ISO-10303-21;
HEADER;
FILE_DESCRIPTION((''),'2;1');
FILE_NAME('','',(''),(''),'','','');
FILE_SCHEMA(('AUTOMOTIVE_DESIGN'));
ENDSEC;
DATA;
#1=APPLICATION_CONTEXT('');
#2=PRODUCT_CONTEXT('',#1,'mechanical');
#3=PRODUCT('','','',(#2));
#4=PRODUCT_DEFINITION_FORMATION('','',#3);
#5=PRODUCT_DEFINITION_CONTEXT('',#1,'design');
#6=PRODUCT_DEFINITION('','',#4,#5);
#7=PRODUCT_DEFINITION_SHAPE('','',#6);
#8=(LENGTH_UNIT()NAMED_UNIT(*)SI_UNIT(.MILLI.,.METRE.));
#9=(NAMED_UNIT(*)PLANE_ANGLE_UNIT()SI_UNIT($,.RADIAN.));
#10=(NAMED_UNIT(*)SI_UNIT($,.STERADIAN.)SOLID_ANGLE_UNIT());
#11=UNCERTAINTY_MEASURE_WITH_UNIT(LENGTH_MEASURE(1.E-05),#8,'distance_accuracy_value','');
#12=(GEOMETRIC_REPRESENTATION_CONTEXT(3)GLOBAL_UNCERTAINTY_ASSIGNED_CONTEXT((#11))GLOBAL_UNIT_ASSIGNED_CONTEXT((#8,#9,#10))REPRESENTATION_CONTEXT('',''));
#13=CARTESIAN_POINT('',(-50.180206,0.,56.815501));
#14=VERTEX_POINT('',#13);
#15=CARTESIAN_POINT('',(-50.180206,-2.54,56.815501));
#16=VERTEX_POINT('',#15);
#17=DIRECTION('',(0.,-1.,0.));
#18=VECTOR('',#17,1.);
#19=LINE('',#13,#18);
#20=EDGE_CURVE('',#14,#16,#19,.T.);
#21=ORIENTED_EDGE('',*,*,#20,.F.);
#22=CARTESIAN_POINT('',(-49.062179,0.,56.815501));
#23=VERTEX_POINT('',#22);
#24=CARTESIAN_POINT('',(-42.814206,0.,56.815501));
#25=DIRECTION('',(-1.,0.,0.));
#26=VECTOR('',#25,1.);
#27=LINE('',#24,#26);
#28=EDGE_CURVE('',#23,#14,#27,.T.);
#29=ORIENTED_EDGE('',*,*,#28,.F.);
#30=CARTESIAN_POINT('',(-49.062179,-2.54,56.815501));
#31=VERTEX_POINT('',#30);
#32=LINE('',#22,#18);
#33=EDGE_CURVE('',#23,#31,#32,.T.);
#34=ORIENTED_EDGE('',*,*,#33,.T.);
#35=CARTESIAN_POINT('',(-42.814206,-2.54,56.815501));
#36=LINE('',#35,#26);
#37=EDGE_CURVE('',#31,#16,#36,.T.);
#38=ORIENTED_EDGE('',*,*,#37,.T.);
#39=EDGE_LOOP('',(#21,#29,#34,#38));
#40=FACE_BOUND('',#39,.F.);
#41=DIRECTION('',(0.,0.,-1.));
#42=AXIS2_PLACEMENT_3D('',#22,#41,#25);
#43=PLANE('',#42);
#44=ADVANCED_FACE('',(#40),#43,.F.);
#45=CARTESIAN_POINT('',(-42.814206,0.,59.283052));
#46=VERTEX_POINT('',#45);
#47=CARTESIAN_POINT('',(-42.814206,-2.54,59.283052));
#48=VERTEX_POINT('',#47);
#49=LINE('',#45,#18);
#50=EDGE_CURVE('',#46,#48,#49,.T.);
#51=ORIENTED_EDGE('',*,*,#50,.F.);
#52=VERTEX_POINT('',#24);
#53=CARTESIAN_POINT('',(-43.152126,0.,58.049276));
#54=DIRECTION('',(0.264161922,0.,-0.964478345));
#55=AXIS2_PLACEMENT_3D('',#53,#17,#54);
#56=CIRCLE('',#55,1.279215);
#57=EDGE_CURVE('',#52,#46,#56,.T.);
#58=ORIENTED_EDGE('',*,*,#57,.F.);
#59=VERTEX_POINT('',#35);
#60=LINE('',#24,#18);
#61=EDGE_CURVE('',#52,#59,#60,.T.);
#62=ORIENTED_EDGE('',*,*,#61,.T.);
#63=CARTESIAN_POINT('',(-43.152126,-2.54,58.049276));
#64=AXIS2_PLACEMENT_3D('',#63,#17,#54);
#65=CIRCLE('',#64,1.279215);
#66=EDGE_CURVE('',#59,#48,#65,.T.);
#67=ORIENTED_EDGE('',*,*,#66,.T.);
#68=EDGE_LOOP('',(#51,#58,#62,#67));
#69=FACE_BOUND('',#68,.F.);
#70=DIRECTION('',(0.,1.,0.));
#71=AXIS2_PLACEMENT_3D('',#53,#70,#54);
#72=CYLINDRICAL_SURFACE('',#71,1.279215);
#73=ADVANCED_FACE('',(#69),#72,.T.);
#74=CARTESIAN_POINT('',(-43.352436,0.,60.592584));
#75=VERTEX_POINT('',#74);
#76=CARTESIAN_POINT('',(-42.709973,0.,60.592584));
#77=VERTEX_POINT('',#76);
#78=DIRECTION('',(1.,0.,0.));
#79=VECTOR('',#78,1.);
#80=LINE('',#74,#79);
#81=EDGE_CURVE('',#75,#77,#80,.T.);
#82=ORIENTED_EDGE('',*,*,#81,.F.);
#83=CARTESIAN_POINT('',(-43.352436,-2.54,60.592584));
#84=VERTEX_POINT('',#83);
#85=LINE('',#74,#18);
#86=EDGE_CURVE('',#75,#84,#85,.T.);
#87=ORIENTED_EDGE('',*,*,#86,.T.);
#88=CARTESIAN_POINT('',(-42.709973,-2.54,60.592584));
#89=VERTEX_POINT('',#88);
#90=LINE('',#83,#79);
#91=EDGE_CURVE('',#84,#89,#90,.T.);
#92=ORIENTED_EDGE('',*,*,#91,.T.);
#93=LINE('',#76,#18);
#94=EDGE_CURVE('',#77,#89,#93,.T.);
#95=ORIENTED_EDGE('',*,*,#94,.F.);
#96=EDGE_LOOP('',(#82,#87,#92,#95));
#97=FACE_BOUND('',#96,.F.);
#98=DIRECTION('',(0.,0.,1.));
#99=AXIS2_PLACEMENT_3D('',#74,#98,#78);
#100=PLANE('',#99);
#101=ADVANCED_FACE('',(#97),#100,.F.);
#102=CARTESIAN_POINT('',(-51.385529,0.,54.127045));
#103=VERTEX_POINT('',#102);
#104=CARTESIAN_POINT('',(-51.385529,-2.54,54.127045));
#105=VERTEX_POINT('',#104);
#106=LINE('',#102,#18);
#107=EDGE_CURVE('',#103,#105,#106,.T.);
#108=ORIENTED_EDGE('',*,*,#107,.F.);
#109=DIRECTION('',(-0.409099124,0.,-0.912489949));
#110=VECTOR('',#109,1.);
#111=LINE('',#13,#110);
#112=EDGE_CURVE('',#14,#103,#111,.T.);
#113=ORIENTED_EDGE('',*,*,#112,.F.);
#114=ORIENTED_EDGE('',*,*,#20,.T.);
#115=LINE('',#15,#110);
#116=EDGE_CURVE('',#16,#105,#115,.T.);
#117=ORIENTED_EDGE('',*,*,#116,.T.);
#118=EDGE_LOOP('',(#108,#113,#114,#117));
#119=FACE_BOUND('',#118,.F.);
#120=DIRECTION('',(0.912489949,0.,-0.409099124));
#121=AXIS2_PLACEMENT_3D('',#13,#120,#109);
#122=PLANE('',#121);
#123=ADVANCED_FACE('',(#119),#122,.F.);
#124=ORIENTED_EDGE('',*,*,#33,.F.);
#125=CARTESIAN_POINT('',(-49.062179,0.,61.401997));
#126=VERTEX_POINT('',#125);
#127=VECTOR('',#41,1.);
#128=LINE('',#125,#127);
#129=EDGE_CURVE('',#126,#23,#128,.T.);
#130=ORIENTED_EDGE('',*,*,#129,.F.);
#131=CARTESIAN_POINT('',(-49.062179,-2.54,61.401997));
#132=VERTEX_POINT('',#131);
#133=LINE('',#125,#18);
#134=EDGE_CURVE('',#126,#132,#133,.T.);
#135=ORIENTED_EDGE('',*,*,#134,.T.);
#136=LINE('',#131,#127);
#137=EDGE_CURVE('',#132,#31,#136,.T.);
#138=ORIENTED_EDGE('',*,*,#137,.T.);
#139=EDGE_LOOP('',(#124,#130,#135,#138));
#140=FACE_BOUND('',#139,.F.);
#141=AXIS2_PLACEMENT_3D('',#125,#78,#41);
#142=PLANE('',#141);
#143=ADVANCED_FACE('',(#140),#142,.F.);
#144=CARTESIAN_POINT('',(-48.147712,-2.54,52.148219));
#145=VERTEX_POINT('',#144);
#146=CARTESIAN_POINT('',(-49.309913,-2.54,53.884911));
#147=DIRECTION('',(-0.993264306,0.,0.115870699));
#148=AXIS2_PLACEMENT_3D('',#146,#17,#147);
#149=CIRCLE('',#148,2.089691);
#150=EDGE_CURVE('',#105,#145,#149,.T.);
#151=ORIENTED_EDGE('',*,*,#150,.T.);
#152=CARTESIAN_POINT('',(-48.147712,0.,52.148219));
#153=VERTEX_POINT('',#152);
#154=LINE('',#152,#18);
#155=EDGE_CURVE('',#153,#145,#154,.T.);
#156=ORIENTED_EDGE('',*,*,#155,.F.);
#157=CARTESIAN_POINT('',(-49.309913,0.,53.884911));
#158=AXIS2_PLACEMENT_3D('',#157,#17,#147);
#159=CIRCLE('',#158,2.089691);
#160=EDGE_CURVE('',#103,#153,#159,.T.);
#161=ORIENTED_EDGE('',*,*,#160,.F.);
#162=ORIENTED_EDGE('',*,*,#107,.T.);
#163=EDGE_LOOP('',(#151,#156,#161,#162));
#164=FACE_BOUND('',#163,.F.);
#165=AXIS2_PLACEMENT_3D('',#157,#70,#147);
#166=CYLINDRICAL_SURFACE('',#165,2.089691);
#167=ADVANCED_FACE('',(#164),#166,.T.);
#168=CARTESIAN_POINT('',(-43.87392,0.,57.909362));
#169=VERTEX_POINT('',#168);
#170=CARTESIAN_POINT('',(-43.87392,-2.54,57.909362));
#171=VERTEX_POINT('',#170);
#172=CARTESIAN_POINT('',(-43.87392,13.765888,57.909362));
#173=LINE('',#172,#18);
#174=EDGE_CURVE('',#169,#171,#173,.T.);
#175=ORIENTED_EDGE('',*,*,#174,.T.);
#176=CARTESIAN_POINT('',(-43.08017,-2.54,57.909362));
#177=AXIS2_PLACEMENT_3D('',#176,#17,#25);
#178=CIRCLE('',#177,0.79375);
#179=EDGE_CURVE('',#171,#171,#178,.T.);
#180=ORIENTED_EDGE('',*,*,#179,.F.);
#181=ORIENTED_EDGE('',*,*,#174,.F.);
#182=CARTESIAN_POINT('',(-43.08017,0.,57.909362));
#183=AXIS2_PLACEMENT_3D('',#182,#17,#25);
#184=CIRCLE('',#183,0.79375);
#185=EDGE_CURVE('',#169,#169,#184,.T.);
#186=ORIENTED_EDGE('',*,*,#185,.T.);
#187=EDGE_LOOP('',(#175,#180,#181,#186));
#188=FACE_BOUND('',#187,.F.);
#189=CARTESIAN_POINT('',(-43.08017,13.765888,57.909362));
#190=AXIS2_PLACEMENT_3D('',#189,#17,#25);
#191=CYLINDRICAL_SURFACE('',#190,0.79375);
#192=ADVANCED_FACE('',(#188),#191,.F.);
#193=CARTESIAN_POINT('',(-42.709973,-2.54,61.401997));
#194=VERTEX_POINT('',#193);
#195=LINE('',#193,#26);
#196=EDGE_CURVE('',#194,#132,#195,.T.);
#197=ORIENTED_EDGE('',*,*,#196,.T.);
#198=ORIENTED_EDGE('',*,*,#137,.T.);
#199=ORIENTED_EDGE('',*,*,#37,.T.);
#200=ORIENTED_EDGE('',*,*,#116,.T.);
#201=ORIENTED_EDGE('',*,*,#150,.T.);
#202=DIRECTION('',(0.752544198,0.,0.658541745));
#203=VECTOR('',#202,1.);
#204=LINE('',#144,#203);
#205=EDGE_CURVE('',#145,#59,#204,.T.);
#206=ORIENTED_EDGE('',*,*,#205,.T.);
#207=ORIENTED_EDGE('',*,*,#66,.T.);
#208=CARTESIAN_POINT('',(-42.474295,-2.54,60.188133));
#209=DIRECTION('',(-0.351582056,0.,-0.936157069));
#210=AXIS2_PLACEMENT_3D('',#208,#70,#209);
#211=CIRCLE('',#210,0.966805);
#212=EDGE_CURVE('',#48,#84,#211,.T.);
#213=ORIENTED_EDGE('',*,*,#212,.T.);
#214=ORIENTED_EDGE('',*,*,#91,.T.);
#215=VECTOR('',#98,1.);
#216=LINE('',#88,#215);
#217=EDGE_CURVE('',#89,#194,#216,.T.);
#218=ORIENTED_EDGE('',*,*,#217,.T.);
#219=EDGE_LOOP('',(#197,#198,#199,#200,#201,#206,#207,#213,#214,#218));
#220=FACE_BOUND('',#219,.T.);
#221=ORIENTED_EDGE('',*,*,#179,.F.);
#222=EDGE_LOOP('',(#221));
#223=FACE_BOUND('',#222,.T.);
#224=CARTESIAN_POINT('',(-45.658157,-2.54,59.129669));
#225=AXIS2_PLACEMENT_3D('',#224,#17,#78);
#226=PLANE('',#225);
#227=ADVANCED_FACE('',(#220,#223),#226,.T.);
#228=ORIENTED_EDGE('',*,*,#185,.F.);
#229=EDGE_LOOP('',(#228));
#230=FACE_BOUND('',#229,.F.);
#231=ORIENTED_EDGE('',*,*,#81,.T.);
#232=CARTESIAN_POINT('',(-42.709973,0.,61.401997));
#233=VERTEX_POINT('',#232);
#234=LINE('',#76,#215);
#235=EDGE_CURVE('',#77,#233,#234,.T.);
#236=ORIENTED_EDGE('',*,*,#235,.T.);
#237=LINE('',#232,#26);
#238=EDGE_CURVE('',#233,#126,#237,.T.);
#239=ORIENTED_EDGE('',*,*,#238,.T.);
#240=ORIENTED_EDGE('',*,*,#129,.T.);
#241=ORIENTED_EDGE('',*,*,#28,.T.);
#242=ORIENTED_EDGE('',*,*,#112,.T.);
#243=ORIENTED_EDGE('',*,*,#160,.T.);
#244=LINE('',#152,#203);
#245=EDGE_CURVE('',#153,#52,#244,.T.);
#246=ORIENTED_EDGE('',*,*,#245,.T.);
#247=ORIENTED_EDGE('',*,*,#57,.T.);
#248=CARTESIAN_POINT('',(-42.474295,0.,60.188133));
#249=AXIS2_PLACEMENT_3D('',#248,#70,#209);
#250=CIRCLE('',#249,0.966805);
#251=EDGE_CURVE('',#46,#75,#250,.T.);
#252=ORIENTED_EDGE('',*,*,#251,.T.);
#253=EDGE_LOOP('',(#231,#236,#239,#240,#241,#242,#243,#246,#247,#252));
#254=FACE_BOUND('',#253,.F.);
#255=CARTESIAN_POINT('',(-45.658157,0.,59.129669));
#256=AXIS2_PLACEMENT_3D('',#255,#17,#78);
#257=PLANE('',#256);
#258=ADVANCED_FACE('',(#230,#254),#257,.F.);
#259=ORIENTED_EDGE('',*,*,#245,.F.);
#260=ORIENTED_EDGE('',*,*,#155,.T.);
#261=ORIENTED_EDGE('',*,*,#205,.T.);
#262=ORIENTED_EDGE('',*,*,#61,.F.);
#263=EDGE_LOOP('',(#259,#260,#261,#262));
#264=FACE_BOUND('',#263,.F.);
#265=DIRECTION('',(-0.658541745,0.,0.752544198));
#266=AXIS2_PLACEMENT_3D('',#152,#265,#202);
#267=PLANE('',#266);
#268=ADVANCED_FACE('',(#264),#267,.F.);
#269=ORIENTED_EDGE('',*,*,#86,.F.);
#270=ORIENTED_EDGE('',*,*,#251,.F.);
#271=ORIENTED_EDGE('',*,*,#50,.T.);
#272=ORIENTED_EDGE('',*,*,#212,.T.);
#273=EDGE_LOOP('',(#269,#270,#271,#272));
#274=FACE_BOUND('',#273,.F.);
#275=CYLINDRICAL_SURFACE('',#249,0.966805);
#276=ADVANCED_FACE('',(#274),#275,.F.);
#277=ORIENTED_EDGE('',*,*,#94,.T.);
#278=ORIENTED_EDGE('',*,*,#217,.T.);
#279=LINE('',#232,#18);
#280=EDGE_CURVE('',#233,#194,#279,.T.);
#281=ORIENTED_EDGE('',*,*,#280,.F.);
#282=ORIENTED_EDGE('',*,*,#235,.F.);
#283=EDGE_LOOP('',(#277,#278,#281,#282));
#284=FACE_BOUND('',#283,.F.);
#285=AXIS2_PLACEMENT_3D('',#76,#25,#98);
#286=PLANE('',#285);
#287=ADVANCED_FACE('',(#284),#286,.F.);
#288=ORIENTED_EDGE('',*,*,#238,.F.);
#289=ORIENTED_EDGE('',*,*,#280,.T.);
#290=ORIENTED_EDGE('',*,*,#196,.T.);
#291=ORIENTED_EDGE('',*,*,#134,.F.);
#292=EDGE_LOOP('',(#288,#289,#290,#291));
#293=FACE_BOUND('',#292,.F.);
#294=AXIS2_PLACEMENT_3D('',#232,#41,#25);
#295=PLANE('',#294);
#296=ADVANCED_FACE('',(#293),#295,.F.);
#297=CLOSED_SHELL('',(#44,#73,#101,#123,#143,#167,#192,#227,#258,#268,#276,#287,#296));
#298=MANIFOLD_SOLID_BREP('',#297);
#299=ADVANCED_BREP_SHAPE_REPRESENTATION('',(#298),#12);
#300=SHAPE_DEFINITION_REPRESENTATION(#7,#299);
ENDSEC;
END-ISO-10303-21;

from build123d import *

# Parameters (mm, degrees)
F1_DEPTH = 2.54
F2_D     = 1.5875


# Not quite as in the source:
# - a feature names something its author has since deleted; it is built from what else it names


with BuildPart() as f1:
    # F0 (on Front) → F1 (new body)
    with BuildSketch(Plane.XZ):
        with BuildLine():
            Line((-49.06217859, 61.4019967616), (-49.06217859, 56.8155013025))
            Line((-49.06217859, 56.8155013025), (-42.814206332, 56.8155013025))
            ThreePointArc((-42.814206332, 56.8155013025), (-41.8729112238, 58.0492764711), (-42.814206332, 59.2830516398))
            ThreePointArc((-42.814206332, 59.2830516398), (-43.3685164044, 59.8206001728), (-43.3524362743, 60.592584312))
            Line((-43.3524362743, 60.592584312), (-42.7099727094, 60.592584312))
            Line((-42.7099727094, 60.592584312), (-42.7099727094, 61.4019967616))
            Line((-42.7099727094, 61.4019967616), (-49.06217859, 61.4019967616))
        make_face()
        with BuildLine():
            Line((-49.06217859, 56.8155013025), (-50.180206332, 56.8155013025))
            Line((-50.180206332, 56.8155013025), (-51.3855293393, 54.1270449758))
            ThreePointArc((-51.3855293393, 54.1270449758), (-50.3996469968, 52.1018542735), (-48.1477119029, 52.148219198))
            Line((-48.1477119029, 52.148219198), (-42.814206332, 56.8155013025))
            Line((-42.814206332, 56.8155013025), (-49.06217859, 56.8155013025))
        make_face()
    extrude(amount=F1_DEPTH)

    # F2 (through all)
    with Locations(Plane(origin=(0, 0, 0), x_dir=(1, 0, 0), z_dir=(0, 1, 0))):
        with Locations((-43.0801697075, -57.9093620181)):
            Hole(F2_D / 2)


solid = f1.part
